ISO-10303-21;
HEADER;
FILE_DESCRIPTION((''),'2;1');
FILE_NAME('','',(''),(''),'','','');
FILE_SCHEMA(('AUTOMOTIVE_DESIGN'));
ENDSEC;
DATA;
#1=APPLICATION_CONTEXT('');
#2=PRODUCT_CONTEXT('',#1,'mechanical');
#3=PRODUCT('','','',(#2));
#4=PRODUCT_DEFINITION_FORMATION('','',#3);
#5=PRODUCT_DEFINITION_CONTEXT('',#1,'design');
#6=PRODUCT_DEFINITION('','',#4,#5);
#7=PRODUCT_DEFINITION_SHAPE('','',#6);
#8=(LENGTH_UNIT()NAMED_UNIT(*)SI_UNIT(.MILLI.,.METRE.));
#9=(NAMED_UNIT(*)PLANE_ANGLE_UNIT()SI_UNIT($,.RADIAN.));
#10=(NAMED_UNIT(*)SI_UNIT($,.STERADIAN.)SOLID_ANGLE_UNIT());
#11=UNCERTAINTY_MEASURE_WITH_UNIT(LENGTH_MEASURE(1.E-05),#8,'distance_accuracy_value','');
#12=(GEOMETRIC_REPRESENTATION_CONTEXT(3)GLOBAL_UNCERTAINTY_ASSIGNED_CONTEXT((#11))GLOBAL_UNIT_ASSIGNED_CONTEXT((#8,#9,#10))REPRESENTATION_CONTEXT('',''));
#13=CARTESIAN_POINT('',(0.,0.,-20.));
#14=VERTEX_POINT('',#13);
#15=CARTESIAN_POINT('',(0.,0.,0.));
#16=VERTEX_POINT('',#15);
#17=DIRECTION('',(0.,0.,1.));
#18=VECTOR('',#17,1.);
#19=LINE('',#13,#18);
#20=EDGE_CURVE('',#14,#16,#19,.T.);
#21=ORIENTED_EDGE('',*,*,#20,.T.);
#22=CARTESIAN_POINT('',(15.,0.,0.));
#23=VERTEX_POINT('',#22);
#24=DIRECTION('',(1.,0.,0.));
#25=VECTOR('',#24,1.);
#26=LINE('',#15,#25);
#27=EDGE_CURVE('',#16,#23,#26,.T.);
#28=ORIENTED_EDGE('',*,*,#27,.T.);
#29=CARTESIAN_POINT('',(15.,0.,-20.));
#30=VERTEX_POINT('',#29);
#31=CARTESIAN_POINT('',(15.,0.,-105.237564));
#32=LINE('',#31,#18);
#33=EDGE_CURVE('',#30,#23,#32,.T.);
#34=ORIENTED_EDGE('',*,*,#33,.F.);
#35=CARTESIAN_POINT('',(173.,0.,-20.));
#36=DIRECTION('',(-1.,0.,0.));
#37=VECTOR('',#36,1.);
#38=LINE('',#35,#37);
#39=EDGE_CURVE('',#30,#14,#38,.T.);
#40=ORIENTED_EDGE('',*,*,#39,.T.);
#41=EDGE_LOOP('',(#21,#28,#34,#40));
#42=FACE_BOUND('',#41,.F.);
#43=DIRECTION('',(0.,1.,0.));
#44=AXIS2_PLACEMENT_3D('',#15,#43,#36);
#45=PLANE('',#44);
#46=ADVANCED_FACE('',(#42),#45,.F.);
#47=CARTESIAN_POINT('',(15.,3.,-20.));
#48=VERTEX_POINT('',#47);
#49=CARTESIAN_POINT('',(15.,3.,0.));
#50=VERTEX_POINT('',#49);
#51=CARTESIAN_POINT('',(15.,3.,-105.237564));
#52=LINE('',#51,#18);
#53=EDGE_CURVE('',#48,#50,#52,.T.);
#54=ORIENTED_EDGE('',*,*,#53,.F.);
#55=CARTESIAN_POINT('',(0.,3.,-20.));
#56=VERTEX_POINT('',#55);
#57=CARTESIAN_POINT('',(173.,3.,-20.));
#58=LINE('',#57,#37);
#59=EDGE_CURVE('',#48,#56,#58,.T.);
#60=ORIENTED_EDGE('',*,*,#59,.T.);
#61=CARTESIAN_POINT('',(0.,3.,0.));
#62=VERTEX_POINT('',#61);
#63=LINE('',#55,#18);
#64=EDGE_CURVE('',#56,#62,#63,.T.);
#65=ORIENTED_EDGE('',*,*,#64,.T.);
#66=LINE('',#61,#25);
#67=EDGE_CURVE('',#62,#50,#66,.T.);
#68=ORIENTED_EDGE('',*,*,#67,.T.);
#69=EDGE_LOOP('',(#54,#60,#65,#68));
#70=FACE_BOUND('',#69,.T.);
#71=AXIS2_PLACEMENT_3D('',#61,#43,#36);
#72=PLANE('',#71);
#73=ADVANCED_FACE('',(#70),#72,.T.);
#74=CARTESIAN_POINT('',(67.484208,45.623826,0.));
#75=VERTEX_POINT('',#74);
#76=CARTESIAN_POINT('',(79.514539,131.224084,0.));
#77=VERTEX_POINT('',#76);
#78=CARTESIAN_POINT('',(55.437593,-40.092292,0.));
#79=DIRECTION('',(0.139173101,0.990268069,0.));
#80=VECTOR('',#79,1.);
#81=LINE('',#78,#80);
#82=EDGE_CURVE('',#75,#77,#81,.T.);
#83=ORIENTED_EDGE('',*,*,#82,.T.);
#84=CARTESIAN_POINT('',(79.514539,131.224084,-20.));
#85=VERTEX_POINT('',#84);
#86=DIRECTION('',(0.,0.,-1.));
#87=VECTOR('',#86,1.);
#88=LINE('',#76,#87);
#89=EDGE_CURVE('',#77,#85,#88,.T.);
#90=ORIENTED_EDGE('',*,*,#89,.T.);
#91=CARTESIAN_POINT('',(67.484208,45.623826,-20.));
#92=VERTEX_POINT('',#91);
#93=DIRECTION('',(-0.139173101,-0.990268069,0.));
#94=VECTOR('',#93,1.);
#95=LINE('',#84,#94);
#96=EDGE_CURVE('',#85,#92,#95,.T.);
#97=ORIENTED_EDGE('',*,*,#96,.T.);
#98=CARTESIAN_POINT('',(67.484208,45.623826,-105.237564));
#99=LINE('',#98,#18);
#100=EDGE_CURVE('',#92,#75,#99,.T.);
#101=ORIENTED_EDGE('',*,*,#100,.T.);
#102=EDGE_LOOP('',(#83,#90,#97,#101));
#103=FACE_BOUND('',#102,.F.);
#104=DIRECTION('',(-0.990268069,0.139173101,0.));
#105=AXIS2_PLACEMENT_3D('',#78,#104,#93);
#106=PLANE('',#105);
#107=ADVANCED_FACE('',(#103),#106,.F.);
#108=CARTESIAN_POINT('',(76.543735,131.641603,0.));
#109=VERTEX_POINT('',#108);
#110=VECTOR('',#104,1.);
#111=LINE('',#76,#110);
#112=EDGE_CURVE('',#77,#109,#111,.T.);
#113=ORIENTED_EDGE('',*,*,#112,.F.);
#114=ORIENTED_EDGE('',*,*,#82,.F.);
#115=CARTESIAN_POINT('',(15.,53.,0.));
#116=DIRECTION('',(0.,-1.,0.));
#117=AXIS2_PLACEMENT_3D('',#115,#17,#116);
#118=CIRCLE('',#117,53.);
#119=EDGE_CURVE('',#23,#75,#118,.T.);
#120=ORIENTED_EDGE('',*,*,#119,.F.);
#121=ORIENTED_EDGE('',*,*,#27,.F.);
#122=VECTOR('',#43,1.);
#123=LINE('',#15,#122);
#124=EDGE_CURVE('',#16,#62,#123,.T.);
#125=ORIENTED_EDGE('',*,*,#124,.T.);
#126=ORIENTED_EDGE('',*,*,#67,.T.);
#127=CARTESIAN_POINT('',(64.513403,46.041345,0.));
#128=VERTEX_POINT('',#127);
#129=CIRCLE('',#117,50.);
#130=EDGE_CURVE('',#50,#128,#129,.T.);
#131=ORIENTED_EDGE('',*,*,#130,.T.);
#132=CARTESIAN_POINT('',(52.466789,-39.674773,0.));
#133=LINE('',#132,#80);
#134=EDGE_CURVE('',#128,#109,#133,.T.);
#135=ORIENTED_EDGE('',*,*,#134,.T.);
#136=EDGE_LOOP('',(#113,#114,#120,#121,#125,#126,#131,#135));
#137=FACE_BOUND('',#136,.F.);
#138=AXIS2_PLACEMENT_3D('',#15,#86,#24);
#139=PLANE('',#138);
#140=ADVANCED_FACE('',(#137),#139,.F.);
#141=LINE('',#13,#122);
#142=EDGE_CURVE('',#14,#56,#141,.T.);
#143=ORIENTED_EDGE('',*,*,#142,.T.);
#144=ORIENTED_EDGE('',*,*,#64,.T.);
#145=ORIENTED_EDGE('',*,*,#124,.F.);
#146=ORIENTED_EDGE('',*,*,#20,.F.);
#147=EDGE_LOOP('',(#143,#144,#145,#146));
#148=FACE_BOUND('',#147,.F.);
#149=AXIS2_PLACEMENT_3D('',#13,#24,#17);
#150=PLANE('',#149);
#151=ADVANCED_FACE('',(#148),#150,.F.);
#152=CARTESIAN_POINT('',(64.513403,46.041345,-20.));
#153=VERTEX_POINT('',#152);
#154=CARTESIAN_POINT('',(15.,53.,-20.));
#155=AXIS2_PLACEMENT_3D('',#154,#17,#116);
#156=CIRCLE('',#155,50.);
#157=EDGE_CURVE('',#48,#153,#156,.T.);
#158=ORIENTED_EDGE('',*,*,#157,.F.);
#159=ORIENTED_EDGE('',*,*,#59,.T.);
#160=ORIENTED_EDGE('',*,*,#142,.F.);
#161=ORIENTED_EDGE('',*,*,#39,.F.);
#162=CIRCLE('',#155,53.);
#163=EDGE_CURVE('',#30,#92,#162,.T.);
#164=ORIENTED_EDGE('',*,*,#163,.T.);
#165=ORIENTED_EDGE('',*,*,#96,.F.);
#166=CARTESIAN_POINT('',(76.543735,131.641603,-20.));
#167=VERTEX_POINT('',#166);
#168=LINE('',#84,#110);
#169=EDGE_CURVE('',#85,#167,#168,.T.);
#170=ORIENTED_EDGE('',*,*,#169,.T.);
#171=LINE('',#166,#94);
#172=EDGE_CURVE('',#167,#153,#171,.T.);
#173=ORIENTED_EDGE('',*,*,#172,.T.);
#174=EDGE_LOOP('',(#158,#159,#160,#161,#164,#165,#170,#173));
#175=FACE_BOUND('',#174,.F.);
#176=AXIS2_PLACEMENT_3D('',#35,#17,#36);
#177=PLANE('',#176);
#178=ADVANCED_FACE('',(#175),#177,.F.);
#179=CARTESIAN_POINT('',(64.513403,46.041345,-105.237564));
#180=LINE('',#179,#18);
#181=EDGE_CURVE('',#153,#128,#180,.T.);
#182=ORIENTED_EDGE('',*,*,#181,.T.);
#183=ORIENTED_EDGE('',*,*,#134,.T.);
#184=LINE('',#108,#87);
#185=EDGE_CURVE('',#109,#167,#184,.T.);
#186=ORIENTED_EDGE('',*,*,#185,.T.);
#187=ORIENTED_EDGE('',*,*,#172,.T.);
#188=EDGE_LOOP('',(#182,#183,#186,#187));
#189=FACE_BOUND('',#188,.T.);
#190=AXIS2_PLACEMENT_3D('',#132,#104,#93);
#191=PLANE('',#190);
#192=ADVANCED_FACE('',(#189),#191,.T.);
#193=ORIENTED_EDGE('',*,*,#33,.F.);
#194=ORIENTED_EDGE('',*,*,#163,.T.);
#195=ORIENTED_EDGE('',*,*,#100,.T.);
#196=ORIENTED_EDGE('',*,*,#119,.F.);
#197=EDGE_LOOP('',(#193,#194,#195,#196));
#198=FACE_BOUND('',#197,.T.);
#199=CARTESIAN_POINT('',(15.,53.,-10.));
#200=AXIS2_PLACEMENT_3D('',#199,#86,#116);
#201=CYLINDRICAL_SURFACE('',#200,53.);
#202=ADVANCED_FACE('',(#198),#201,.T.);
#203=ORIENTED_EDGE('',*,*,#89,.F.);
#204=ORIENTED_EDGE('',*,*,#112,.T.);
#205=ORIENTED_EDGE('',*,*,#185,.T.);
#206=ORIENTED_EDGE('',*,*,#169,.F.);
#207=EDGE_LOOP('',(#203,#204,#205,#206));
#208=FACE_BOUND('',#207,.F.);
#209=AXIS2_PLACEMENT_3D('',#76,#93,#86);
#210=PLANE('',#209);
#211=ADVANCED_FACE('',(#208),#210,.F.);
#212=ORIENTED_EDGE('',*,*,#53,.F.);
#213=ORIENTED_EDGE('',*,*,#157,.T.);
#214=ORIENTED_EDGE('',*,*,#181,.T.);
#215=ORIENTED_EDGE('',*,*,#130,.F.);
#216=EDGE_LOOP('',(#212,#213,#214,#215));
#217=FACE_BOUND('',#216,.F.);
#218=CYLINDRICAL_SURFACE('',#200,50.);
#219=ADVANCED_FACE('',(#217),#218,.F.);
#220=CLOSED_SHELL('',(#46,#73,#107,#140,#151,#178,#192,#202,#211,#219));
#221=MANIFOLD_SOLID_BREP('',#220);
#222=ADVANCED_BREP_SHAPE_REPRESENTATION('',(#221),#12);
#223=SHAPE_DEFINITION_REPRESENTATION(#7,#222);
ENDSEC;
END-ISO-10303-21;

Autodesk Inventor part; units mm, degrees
ref_plane "YZ Plane" through (0, 0, 0) normal (1, 0, 0) x (0, 1, 0)
ref_plane "XZ Plane" through (0, 0, 0) normal (0, 1, 0) x (-1, 0, 0)
ref_plane "XY Plane" through (0, 0, 0) normal (0, 0, 1) x (1, 0, 0)
sketch "Sketch2" plane through (0, 0, 0) normal (0, 1, 0) x (-1, 0, 0)
  line L0 (0, 0) -> (-173, 0)
  line L1 (-173, 0) -> (-173, -20)
  line L2 (-173, -20) -> (0, -20)
  line L3 (0, -20) -> (0, 0)
  dimension "d0" = 173
  dimension "d1" = 20
extrude "Extrusion1" add sketch "Sketch2" along normal blind 3
sketch "Sketch3" plane through (0, 3, 0) normal (0, 1, 0) x (1, 0, 0)
  line L0 (173, 20) -> (0, 20) projected
  line L1 (173, 0) -> (173, 20) projected
  line L2 (173, 20) -> (173, 0)
  line L3 (15, 20) -> (15, 0)
  line L4 (0, 0) -> (173, 0) projected
  line L5 (0, 20) -> (0, 0) projected
  dimension "d8" = 15
bend part "Bend Part1" radius 50 angle 82 line through (15, 3, -20) along (0, 0, 1) centre toward (0, 1, 0) moving side (1, 0, 0) both sides no
properties part number "ball-reload-left"
